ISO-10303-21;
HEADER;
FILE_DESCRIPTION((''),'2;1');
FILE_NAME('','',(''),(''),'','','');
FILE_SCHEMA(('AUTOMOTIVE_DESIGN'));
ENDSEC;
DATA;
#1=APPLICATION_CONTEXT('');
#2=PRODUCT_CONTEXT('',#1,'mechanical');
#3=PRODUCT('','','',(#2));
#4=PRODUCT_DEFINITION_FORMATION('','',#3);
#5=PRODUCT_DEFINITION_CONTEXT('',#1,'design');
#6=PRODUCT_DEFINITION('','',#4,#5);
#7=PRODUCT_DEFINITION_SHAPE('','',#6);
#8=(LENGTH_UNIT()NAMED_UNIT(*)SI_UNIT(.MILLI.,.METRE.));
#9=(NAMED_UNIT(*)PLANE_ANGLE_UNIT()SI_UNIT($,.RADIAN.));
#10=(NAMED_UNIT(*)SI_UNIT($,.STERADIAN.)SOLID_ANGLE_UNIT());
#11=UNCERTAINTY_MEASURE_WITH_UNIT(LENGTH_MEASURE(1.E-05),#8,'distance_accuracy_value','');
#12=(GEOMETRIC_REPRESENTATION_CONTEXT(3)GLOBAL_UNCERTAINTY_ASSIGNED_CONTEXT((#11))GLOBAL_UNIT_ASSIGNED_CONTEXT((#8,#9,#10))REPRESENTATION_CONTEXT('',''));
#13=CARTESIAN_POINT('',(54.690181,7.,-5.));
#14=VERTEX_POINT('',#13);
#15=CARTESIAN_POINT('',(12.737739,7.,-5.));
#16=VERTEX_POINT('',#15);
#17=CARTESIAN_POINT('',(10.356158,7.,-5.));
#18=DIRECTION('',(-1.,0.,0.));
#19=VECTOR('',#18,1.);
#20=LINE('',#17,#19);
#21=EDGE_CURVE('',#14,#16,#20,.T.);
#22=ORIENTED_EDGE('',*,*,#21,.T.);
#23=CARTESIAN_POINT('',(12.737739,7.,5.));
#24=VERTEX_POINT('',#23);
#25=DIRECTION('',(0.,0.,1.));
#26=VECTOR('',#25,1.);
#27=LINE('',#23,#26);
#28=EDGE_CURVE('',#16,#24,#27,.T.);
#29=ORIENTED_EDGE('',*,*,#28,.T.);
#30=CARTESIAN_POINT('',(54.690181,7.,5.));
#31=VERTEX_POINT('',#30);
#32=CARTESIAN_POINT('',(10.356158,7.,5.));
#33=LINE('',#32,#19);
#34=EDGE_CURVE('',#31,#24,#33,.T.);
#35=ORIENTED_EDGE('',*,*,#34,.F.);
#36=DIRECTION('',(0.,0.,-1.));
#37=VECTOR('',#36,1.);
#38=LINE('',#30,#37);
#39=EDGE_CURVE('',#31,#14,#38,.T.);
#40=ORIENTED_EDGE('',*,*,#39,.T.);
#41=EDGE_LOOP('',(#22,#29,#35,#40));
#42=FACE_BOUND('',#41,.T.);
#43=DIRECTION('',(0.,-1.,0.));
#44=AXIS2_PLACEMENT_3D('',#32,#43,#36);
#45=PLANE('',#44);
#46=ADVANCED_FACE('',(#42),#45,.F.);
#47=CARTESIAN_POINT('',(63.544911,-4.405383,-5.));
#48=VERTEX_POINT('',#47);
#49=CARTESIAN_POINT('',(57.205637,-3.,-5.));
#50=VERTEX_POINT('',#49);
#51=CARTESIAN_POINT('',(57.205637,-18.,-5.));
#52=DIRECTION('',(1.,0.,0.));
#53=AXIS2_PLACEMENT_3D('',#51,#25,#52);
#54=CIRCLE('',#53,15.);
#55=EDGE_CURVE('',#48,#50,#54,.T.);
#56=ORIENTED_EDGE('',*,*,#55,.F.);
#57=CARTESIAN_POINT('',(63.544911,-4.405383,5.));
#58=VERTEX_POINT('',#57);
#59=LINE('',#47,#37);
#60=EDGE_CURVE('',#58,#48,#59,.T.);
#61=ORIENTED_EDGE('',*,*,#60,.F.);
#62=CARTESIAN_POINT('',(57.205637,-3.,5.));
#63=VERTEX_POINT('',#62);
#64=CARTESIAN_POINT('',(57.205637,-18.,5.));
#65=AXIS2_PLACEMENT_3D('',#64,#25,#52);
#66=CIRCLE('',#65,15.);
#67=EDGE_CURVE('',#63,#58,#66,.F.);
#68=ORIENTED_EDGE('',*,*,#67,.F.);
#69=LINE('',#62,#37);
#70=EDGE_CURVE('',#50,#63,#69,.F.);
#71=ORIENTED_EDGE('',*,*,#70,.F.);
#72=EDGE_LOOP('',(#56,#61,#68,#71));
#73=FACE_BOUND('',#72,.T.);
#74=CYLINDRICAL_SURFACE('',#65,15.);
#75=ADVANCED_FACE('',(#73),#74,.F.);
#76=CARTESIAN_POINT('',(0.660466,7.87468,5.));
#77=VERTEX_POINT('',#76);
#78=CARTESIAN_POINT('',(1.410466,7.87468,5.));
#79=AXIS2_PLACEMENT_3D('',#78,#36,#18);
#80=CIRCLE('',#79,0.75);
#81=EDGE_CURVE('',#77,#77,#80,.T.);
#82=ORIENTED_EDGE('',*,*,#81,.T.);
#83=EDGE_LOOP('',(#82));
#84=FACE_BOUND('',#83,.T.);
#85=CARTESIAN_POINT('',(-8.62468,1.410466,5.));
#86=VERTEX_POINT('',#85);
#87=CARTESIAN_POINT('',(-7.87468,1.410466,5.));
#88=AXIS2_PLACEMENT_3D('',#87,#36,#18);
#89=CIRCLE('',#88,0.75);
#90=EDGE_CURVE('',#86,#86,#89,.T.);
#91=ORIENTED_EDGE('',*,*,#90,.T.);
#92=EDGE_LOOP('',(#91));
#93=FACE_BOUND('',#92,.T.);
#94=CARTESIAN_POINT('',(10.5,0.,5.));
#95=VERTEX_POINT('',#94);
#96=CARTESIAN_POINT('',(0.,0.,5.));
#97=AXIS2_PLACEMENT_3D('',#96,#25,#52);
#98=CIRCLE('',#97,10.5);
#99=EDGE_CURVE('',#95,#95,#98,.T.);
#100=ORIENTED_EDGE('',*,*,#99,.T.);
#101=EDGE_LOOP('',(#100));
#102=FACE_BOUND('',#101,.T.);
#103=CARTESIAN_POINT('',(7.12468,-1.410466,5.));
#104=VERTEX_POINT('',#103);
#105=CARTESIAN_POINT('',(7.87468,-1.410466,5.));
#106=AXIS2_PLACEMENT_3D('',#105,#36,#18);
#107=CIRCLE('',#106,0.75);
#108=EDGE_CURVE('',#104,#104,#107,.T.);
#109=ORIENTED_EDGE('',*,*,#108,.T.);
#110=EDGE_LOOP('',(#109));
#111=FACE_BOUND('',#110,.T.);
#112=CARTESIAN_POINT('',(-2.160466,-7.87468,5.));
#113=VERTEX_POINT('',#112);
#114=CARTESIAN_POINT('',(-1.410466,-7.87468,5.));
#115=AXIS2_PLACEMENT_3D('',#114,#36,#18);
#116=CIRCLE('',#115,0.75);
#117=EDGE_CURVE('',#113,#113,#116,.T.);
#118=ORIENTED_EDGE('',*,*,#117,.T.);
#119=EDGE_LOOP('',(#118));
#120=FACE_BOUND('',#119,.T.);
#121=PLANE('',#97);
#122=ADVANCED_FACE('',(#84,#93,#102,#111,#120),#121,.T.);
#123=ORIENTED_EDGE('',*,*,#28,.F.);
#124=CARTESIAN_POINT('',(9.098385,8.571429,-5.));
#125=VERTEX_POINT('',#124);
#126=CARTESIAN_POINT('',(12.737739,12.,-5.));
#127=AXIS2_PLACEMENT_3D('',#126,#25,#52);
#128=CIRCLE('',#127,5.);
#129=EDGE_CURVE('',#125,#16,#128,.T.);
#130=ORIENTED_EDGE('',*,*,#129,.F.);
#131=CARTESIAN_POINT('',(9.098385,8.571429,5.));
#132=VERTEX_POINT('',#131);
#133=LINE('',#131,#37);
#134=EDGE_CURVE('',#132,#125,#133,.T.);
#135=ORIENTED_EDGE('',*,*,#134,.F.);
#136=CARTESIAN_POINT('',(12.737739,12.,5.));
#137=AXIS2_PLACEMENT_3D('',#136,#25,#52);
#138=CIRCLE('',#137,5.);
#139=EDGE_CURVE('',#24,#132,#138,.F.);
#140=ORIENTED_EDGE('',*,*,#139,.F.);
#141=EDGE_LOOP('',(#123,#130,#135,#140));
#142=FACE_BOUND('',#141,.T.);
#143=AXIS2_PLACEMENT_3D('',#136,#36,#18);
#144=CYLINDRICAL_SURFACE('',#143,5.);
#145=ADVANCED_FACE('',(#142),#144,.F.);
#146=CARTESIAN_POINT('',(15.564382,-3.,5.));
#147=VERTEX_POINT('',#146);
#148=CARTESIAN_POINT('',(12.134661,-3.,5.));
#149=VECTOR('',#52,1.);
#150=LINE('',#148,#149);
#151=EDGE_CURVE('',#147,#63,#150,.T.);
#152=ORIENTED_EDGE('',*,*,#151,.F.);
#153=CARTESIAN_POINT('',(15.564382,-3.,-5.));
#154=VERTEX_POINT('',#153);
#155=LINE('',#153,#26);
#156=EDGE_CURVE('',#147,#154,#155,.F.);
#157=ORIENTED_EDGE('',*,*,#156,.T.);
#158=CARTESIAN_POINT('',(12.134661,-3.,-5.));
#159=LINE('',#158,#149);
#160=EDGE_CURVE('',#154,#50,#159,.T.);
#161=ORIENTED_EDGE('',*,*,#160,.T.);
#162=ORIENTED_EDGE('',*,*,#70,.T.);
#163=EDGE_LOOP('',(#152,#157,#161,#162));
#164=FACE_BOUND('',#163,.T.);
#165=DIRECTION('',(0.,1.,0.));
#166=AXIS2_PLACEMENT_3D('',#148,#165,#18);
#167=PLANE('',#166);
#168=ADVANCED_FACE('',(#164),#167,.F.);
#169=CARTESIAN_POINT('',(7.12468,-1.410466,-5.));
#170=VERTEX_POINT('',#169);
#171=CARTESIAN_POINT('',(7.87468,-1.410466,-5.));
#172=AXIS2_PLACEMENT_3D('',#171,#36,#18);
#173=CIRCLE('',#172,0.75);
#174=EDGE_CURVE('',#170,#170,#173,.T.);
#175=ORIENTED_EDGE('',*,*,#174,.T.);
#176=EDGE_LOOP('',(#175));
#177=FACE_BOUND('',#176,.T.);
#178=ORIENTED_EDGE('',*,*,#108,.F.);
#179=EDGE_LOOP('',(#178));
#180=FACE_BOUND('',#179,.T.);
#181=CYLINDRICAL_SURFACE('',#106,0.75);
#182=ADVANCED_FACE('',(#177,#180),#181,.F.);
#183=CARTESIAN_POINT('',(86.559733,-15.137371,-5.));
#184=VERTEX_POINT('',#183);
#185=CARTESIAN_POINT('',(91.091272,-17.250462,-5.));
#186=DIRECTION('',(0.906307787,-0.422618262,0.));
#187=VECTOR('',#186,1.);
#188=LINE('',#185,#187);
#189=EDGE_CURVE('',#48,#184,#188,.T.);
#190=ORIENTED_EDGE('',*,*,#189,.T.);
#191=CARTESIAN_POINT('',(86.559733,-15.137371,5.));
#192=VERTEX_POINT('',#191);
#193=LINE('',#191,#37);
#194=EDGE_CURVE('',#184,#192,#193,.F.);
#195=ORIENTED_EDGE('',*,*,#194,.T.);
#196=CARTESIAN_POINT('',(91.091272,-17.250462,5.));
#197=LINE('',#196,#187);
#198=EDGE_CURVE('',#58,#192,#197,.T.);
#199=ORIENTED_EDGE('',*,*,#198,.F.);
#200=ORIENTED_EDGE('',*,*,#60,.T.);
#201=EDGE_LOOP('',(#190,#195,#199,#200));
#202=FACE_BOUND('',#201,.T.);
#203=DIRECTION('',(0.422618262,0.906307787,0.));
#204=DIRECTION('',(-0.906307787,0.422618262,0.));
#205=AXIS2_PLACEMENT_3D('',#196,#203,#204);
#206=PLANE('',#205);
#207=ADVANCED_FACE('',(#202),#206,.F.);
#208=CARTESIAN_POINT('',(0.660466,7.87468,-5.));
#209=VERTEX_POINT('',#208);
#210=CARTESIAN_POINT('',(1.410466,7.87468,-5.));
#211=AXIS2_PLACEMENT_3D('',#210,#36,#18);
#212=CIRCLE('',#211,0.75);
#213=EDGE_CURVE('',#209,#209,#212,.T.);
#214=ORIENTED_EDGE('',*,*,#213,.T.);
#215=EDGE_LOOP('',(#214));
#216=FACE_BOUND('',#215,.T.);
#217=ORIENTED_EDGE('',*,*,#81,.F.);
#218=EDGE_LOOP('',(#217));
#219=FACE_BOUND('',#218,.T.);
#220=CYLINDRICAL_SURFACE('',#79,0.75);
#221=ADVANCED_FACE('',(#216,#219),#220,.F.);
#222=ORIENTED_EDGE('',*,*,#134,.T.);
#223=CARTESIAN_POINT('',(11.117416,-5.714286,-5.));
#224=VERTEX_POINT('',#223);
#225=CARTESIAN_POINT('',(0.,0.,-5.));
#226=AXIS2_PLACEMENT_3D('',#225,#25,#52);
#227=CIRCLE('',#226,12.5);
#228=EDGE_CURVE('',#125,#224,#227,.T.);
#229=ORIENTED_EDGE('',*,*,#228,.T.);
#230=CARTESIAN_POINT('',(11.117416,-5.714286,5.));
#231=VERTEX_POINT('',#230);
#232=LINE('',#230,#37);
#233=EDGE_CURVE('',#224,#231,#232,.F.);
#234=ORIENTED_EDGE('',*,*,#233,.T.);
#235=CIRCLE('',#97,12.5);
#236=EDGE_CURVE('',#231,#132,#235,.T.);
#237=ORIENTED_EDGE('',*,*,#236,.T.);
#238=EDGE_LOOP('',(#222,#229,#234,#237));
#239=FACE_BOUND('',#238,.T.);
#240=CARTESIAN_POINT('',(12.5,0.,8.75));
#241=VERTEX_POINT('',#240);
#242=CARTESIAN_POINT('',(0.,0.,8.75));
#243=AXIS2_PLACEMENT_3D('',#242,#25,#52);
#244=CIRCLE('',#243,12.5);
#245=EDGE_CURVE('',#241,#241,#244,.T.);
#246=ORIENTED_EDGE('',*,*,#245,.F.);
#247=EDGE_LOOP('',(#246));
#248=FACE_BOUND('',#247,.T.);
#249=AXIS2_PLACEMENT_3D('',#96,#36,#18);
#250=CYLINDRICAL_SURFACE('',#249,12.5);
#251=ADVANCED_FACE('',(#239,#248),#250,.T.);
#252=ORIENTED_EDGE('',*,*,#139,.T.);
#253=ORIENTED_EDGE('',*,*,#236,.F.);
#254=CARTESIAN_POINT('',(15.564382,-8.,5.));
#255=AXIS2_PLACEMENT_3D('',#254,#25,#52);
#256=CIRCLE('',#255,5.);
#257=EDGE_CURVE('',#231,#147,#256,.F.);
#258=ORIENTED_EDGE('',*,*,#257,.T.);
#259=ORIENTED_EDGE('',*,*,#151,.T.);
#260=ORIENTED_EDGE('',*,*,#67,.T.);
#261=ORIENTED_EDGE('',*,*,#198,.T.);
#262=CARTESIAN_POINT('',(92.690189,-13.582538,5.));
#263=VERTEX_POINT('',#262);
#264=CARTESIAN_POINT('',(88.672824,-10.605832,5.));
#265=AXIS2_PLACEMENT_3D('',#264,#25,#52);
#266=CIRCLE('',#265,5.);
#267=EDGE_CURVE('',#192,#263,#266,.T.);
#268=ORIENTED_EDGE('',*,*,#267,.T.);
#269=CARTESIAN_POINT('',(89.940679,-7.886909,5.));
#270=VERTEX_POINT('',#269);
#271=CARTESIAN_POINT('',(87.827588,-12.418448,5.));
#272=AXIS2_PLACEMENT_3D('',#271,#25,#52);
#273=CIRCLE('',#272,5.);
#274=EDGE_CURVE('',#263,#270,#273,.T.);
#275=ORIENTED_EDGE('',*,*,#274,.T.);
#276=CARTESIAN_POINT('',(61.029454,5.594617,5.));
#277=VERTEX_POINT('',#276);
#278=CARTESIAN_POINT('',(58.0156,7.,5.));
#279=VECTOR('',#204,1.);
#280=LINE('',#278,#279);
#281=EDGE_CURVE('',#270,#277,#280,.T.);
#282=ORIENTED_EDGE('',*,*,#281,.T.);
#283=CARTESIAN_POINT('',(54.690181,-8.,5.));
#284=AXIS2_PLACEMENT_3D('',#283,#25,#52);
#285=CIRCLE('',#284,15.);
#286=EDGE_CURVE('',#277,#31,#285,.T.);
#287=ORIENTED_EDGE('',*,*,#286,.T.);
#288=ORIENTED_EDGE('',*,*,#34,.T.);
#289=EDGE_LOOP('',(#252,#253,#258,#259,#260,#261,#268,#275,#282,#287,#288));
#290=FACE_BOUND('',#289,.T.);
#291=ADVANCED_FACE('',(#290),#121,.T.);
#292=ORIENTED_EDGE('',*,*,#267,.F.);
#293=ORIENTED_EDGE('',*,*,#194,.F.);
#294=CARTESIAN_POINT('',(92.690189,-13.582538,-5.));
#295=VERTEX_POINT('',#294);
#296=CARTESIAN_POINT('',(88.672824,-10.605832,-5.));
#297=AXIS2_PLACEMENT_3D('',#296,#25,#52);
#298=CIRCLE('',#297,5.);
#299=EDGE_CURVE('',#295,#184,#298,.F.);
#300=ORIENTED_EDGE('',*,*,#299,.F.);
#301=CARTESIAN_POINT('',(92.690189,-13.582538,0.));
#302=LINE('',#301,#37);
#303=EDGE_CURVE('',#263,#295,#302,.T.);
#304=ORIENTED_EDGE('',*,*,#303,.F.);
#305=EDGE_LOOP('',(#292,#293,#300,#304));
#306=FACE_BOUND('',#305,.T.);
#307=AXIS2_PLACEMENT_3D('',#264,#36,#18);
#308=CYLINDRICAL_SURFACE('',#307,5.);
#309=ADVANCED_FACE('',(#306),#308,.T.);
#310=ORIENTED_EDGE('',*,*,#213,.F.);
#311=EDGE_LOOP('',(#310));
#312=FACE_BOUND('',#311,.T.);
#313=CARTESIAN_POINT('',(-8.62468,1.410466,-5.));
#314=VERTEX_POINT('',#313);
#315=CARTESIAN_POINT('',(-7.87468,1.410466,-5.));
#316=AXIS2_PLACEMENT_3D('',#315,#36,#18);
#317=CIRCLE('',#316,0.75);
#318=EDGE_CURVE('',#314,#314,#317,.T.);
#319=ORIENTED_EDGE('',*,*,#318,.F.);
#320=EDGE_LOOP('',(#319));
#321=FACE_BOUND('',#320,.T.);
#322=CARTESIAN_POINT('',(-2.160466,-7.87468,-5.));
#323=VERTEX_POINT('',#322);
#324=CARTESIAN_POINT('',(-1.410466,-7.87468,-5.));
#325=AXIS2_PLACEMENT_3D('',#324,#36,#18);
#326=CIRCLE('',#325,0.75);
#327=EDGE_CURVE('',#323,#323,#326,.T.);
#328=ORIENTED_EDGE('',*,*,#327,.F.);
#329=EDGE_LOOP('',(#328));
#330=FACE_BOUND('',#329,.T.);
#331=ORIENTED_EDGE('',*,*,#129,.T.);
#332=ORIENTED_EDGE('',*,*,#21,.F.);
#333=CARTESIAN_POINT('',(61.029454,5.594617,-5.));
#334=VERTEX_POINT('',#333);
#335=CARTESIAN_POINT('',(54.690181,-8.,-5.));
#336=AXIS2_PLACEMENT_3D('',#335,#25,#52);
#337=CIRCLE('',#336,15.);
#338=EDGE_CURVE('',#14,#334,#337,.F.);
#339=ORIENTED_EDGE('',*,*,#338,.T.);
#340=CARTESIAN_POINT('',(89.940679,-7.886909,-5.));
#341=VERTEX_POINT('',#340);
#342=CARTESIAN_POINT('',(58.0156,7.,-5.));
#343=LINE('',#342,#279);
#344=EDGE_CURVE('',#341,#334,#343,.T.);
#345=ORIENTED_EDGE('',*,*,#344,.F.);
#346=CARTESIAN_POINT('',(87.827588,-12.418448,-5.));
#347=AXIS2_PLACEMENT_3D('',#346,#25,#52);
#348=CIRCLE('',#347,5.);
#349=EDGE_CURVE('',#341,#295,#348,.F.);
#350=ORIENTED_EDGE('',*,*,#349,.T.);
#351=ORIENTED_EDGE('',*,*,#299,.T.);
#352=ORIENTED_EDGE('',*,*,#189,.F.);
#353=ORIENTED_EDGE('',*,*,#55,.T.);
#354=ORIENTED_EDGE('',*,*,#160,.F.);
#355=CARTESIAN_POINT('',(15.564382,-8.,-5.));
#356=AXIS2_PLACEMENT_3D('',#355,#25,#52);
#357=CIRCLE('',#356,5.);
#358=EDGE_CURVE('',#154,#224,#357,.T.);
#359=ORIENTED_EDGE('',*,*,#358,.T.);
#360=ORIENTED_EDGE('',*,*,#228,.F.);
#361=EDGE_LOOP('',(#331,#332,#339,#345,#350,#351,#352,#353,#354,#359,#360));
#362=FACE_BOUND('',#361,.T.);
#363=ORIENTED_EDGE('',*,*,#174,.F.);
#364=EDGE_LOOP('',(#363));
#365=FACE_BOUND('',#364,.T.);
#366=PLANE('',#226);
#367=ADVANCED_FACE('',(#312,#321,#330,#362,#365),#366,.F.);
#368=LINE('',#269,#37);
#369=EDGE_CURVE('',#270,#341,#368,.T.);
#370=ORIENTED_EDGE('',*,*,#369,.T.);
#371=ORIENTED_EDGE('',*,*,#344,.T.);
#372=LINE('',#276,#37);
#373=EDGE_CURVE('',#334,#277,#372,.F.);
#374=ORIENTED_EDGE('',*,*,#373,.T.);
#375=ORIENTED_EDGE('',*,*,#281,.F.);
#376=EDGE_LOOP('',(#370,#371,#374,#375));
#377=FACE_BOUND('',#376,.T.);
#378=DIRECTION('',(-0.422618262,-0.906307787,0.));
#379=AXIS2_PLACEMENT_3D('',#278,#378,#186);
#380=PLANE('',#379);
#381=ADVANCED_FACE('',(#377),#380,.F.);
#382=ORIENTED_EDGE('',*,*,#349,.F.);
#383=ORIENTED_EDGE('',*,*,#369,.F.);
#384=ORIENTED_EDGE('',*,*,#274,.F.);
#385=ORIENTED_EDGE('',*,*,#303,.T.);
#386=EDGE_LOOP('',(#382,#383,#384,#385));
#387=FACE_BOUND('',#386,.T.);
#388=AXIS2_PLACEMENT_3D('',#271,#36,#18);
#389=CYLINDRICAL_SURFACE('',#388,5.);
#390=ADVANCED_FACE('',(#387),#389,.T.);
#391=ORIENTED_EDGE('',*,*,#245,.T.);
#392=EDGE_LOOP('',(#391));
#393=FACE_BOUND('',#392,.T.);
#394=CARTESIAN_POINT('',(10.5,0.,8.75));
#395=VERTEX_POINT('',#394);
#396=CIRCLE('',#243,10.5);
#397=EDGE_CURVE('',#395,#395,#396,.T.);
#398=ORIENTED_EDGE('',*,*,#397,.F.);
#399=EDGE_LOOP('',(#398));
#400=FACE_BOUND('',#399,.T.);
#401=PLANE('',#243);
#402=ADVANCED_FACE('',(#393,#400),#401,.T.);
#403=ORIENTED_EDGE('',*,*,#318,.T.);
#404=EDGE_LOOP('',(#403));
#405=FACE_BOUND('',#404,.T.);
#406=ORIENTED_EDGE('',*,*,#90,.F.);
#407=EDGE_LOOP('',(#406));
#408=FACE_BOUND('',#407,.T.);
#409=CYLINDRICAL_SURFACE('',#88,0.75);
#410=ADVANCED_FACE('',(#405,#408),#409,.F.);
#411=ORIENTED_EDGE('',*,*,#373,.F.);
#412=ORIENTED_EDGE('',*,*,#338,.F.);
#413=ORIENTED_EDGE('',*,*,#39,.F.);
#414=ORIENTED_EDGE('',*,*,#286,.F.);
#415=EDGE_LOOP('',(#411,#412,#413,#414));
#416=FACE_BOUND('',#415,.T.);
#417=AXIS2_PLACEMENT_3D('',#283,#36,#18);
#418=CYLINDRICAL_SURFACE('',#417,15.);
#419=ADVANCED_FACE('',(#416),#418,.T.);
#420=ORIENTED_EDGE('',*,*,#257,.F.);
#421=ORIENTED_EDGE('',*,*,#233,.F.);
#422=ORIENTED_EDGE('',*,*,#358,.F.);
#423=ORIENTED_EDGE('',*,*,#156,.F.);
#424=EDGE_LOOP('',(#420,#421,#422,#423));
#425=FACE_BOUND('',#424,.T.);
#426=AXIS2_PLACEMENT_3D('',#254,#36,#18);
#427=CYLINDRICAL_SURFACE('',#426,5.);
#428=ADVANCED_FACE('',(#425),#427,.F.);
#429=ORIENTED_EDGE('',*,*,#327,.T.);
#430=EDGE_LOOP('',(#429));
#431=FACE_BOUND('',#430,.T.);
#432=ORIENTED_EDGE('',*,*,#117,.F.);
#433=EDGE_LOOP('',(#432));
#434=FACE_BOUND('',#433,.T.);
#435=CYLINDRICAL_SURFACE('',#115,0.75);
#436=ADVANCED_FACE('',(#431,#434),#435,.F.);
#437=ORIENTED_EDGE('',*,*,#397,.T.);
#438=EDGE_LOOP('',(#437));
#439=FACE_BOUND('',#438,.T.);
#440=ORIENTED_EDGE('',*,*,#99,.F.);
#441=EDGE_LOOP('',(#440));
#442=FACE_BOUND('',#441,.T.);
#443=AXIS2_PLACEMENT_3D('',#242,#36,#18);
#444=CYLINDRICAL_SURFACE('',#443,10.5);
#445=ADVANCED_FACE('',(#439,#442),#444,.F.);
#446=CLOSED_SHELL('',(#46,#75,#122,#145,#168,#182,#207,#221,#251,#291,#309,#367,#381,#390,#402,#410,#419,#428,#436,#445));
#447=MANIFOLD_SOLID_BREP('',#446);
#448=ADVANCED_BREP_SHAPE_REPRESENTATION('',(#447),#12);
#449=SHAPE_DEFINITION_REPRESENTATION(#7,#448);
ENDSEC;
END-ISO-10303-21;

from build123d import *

# Parameters (mm, degrees)
BOSS_EXTRU_1_DEPTH  = 5
CONG_4_R            = 5
CONG_3_R            = 15
CONG_6_R            = 5
SKETCH4_R           = 0.75
CUT_EXTRUDE5_DEPTH  = 95.659933807
BOSS_EXTRUDE1_START = -13.75
SKETCH5_R           = 12.5
SKETCH5_R_2         = 10.5
BOSS_EXTRUDE1_DEPTH = 3.75


with BuildPart() as part:
    # Esquisse1 → Boss.-Extru.1 (new, symmetric)
    with BuildSketch(Plane.XY):
        with BuildLine():
            Line((10.356157589, 7), (58.01560049, 7))
            Line((58.01560049, 7), (94.472218138, -10))
            Line((94.472218138, -10), (91.091272045, -17.250462296))
            Line((91.091272045, -17.250462296), (60.53105703, -3))
            Line((60.53105703, -3), (12.1346611, -3))
            ThreePointArc((12.1346611, -3), (-12.306877399, -2.188782466), (10.356157589, 7))
        make_face()
    extrude(amount=BOSS_EXTRU_1_DEPTH, both=True)

    # Congé4
    cong_4_edges = [part.edges().sort_by_distance(p)[0] for p in [
        (12.1346611, -3, 0),
        (10.356157589, 7, 0),
    ]]
    fillet(cong_4_edges, radius=CONG_4_R)

    # Congé3
    cong_3_edges = [part.edges().sort_by_distance(p)[0] for p in [
        (60.53105703, -3, 0),
        (58.01560049, 7, 0),
    ]]
    fillet(cong_3_edges, radius=CONG_3_R)

    # Congé6
    # the kernel refuses this fillet: 5 mm, written as the material it takes off along each edge
    with BuildSketch(Plane(origin=(94.472218138, -10, 17.5), x_dir=(-0.906307787036649, 0.4226182617407012, 0), z_dir=(0, 0, -1)), Plane(origin=(91.091272045, -17.250462296, 17.5), x_dir=(0.4226182617407007, 0.9063077870366493, 0), z_dir=(0, 0, -1))) as cong_6_piece_1:
        with BuildLine():
            CenterArc((CONG_6_R, -CONG_6_R), CONG_6_R, 90, 90)
            Line((0, -CONG_6_R), (0, 0))
            Line((0, 0), (CONG_6_R, 0))
        make_face()
    extrude(amount=35, mode=Mode.SUBTRACT)

    # Sketch4 → Cut-Extrude5 (cut, through all)
    with BuildSketch(Plane(origin=(0, 0, -5), x_dir=(-1, 0, 0), z_dir=(0, 0, -1))):
        with Locations((-1.410466322, 7.874679978)):
            Circle(SKETCH4_R)
        with Locations((7.874679978, 1.410466322)):
            Circle(SKETCH4_R)
        with Locations((1.410466322, -7.874679978)):
            Circle(SKETCH4_R)
        with Locations((-7.874679978, -1.410466322)):
            Circle(SKETCH4_R)
    extrude(amount=-CUT_EXTRUDE5_DEPTH, mode=Mode.SUBTRACT)

    # Sketch5 → Boss-Extrude1 (add)
    with BuildSketch(Plane(origin=(0, 0, -5), x_dir=(-1, 0, 0), z_dir=(0, 0, -1)).offset(BOSS_EXTRUDE1_START)):
        with Locations(Location((0, 0, 0), (0, 0, 136.708192407))):
            Circle(SKETCH5_R)
        with Locations(Location((0, 0, 0), (0, 0, 180))):
            Circle(SKETCH5_R_2, mode=Mode.SUBTRACT)
    extrude(amount=BOSS_EXTRUDE1_DEPTH)


solid = part.part
